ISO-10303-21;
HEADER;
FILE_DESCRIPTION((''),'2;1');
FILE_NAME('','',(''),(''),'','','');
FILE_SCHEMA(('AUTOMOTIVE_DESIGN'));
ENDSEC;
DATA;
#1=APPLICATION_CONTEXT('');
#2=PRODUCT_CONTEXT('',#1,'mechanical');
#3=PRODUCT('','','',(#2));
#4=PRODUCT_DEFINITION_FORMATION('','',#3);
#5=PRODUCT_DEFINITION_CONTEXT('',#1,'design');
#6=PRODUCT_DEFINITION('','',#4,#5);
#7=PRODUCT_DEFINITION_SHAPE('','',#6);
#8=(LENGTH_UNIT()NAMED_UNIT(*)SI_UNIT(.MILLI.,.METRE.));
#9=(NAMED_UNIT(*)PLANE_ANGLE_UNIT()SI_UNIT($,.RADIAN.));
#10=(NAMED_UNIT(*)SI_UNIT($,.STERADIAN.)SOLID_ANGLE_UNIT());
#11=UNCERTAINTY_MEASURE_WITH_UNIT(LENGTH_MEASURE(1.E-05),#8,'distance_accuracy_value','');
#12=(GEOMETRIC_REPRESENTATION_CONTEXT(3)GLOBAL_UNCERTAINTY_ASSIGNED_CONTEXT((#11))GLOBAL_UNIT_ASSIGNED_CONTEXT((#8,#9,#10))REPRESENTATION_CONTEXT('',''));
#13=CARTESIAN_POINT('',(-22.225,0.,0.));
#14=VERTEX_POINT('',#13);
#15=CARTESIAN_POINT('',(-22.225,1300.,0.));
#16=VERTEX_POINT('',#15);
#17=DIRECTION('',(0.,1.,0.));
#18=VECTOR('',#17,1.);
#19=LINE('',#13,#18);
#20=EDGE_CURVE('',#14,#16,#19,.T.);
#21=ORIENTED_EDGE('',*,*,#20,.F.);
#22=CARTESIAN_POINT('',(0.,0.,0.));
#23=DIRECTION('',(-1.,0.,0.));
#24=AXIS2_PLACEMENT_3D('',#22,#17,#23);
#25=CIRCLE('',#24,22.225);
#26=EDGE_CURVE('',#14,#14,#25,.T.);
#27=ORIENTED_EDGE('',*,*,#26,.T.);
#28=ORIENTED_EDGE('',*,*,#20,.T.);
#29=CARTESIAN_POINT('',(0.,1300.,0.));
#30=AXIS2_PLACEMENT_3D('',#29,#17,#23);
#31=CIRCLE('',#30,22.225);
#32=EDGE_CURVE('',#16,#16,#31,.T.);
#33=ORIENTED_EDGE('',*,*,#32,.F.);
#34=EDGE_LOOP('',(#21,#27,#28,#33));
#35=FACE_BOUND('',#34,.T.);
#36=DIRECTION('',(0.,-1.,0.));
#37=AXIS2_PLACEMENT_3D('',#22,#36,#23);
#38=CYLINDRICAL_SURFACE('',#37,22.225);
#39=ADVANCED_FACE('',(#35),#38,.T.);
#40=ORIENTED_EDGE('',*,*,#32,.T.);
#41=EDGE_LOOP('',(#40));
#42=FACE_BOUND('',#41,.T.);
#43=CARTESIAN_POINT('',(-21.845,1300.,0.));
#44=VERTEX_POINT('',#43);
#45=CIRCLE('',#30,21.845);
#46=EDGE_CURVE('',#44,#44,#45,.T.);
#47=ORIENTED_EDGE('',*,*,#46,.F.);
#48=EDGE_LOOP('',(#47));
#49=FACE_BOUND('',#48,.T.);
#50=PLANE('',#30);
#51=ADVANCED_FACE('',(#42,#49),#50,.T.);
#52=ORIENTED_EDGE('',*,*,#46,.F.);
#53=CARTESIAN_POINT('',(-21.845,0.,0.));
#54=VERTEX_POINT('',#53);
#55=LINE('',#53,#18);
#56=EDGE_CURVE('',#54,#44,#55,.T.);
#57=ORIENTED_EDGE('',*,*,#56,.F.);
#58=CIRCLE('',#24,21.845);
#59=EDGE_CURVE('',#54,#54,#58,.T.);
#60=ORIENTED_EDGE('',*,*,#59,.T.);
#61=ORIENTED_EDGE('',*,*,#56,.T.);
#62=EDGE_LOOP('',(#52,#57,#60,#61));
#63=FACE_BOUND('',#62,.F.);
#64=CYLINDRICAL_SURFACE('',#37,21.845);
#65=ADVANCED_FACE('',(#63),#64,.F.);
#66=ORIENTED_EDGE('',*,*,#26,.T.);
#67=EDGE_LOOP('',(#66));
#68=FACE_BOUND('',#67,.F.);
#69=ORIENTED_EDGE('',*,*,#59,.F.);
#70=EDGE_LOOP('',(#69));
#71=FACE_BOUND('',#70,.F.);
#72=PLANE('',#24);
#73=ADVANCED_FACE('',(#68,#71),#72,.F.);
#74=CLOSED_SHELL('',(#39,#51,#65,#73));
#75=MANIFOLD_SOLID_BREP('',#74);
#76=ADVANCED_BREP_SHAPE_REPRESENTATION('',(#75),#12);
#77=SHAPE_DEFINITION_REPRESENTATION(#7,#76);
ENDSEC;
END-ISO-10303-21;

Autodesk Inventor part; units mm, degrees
ref_plane "YZ Plane" through (0, 0, 0) normal (1, 0, 0) x (0, 1, 0)
ref_plane "XZ Plane" through (0, 0, 0) normal (0, 1, 0) x (-1, 0, 0)
ref_plane "XY Plane" through (0, 0, 0) normal (0, 0, 1) x (1, 0, 0)
sketch "Sketch1" plane through (0, 0, 0) normal (0, 1, 0) x (-1, 0, 0)
  circle A0 centre (0, 0) radius 22.225
  circle A1 centre (0, 0) radius 21.845
  dimension "cylinder_od" = 44.45
  dimension "cylinder_wall" = 0.38
extrude "Extrusion1" add sketch "Sketch1" along normal blind 1300
properties part number "cylinder" material "Stainless Steel"
